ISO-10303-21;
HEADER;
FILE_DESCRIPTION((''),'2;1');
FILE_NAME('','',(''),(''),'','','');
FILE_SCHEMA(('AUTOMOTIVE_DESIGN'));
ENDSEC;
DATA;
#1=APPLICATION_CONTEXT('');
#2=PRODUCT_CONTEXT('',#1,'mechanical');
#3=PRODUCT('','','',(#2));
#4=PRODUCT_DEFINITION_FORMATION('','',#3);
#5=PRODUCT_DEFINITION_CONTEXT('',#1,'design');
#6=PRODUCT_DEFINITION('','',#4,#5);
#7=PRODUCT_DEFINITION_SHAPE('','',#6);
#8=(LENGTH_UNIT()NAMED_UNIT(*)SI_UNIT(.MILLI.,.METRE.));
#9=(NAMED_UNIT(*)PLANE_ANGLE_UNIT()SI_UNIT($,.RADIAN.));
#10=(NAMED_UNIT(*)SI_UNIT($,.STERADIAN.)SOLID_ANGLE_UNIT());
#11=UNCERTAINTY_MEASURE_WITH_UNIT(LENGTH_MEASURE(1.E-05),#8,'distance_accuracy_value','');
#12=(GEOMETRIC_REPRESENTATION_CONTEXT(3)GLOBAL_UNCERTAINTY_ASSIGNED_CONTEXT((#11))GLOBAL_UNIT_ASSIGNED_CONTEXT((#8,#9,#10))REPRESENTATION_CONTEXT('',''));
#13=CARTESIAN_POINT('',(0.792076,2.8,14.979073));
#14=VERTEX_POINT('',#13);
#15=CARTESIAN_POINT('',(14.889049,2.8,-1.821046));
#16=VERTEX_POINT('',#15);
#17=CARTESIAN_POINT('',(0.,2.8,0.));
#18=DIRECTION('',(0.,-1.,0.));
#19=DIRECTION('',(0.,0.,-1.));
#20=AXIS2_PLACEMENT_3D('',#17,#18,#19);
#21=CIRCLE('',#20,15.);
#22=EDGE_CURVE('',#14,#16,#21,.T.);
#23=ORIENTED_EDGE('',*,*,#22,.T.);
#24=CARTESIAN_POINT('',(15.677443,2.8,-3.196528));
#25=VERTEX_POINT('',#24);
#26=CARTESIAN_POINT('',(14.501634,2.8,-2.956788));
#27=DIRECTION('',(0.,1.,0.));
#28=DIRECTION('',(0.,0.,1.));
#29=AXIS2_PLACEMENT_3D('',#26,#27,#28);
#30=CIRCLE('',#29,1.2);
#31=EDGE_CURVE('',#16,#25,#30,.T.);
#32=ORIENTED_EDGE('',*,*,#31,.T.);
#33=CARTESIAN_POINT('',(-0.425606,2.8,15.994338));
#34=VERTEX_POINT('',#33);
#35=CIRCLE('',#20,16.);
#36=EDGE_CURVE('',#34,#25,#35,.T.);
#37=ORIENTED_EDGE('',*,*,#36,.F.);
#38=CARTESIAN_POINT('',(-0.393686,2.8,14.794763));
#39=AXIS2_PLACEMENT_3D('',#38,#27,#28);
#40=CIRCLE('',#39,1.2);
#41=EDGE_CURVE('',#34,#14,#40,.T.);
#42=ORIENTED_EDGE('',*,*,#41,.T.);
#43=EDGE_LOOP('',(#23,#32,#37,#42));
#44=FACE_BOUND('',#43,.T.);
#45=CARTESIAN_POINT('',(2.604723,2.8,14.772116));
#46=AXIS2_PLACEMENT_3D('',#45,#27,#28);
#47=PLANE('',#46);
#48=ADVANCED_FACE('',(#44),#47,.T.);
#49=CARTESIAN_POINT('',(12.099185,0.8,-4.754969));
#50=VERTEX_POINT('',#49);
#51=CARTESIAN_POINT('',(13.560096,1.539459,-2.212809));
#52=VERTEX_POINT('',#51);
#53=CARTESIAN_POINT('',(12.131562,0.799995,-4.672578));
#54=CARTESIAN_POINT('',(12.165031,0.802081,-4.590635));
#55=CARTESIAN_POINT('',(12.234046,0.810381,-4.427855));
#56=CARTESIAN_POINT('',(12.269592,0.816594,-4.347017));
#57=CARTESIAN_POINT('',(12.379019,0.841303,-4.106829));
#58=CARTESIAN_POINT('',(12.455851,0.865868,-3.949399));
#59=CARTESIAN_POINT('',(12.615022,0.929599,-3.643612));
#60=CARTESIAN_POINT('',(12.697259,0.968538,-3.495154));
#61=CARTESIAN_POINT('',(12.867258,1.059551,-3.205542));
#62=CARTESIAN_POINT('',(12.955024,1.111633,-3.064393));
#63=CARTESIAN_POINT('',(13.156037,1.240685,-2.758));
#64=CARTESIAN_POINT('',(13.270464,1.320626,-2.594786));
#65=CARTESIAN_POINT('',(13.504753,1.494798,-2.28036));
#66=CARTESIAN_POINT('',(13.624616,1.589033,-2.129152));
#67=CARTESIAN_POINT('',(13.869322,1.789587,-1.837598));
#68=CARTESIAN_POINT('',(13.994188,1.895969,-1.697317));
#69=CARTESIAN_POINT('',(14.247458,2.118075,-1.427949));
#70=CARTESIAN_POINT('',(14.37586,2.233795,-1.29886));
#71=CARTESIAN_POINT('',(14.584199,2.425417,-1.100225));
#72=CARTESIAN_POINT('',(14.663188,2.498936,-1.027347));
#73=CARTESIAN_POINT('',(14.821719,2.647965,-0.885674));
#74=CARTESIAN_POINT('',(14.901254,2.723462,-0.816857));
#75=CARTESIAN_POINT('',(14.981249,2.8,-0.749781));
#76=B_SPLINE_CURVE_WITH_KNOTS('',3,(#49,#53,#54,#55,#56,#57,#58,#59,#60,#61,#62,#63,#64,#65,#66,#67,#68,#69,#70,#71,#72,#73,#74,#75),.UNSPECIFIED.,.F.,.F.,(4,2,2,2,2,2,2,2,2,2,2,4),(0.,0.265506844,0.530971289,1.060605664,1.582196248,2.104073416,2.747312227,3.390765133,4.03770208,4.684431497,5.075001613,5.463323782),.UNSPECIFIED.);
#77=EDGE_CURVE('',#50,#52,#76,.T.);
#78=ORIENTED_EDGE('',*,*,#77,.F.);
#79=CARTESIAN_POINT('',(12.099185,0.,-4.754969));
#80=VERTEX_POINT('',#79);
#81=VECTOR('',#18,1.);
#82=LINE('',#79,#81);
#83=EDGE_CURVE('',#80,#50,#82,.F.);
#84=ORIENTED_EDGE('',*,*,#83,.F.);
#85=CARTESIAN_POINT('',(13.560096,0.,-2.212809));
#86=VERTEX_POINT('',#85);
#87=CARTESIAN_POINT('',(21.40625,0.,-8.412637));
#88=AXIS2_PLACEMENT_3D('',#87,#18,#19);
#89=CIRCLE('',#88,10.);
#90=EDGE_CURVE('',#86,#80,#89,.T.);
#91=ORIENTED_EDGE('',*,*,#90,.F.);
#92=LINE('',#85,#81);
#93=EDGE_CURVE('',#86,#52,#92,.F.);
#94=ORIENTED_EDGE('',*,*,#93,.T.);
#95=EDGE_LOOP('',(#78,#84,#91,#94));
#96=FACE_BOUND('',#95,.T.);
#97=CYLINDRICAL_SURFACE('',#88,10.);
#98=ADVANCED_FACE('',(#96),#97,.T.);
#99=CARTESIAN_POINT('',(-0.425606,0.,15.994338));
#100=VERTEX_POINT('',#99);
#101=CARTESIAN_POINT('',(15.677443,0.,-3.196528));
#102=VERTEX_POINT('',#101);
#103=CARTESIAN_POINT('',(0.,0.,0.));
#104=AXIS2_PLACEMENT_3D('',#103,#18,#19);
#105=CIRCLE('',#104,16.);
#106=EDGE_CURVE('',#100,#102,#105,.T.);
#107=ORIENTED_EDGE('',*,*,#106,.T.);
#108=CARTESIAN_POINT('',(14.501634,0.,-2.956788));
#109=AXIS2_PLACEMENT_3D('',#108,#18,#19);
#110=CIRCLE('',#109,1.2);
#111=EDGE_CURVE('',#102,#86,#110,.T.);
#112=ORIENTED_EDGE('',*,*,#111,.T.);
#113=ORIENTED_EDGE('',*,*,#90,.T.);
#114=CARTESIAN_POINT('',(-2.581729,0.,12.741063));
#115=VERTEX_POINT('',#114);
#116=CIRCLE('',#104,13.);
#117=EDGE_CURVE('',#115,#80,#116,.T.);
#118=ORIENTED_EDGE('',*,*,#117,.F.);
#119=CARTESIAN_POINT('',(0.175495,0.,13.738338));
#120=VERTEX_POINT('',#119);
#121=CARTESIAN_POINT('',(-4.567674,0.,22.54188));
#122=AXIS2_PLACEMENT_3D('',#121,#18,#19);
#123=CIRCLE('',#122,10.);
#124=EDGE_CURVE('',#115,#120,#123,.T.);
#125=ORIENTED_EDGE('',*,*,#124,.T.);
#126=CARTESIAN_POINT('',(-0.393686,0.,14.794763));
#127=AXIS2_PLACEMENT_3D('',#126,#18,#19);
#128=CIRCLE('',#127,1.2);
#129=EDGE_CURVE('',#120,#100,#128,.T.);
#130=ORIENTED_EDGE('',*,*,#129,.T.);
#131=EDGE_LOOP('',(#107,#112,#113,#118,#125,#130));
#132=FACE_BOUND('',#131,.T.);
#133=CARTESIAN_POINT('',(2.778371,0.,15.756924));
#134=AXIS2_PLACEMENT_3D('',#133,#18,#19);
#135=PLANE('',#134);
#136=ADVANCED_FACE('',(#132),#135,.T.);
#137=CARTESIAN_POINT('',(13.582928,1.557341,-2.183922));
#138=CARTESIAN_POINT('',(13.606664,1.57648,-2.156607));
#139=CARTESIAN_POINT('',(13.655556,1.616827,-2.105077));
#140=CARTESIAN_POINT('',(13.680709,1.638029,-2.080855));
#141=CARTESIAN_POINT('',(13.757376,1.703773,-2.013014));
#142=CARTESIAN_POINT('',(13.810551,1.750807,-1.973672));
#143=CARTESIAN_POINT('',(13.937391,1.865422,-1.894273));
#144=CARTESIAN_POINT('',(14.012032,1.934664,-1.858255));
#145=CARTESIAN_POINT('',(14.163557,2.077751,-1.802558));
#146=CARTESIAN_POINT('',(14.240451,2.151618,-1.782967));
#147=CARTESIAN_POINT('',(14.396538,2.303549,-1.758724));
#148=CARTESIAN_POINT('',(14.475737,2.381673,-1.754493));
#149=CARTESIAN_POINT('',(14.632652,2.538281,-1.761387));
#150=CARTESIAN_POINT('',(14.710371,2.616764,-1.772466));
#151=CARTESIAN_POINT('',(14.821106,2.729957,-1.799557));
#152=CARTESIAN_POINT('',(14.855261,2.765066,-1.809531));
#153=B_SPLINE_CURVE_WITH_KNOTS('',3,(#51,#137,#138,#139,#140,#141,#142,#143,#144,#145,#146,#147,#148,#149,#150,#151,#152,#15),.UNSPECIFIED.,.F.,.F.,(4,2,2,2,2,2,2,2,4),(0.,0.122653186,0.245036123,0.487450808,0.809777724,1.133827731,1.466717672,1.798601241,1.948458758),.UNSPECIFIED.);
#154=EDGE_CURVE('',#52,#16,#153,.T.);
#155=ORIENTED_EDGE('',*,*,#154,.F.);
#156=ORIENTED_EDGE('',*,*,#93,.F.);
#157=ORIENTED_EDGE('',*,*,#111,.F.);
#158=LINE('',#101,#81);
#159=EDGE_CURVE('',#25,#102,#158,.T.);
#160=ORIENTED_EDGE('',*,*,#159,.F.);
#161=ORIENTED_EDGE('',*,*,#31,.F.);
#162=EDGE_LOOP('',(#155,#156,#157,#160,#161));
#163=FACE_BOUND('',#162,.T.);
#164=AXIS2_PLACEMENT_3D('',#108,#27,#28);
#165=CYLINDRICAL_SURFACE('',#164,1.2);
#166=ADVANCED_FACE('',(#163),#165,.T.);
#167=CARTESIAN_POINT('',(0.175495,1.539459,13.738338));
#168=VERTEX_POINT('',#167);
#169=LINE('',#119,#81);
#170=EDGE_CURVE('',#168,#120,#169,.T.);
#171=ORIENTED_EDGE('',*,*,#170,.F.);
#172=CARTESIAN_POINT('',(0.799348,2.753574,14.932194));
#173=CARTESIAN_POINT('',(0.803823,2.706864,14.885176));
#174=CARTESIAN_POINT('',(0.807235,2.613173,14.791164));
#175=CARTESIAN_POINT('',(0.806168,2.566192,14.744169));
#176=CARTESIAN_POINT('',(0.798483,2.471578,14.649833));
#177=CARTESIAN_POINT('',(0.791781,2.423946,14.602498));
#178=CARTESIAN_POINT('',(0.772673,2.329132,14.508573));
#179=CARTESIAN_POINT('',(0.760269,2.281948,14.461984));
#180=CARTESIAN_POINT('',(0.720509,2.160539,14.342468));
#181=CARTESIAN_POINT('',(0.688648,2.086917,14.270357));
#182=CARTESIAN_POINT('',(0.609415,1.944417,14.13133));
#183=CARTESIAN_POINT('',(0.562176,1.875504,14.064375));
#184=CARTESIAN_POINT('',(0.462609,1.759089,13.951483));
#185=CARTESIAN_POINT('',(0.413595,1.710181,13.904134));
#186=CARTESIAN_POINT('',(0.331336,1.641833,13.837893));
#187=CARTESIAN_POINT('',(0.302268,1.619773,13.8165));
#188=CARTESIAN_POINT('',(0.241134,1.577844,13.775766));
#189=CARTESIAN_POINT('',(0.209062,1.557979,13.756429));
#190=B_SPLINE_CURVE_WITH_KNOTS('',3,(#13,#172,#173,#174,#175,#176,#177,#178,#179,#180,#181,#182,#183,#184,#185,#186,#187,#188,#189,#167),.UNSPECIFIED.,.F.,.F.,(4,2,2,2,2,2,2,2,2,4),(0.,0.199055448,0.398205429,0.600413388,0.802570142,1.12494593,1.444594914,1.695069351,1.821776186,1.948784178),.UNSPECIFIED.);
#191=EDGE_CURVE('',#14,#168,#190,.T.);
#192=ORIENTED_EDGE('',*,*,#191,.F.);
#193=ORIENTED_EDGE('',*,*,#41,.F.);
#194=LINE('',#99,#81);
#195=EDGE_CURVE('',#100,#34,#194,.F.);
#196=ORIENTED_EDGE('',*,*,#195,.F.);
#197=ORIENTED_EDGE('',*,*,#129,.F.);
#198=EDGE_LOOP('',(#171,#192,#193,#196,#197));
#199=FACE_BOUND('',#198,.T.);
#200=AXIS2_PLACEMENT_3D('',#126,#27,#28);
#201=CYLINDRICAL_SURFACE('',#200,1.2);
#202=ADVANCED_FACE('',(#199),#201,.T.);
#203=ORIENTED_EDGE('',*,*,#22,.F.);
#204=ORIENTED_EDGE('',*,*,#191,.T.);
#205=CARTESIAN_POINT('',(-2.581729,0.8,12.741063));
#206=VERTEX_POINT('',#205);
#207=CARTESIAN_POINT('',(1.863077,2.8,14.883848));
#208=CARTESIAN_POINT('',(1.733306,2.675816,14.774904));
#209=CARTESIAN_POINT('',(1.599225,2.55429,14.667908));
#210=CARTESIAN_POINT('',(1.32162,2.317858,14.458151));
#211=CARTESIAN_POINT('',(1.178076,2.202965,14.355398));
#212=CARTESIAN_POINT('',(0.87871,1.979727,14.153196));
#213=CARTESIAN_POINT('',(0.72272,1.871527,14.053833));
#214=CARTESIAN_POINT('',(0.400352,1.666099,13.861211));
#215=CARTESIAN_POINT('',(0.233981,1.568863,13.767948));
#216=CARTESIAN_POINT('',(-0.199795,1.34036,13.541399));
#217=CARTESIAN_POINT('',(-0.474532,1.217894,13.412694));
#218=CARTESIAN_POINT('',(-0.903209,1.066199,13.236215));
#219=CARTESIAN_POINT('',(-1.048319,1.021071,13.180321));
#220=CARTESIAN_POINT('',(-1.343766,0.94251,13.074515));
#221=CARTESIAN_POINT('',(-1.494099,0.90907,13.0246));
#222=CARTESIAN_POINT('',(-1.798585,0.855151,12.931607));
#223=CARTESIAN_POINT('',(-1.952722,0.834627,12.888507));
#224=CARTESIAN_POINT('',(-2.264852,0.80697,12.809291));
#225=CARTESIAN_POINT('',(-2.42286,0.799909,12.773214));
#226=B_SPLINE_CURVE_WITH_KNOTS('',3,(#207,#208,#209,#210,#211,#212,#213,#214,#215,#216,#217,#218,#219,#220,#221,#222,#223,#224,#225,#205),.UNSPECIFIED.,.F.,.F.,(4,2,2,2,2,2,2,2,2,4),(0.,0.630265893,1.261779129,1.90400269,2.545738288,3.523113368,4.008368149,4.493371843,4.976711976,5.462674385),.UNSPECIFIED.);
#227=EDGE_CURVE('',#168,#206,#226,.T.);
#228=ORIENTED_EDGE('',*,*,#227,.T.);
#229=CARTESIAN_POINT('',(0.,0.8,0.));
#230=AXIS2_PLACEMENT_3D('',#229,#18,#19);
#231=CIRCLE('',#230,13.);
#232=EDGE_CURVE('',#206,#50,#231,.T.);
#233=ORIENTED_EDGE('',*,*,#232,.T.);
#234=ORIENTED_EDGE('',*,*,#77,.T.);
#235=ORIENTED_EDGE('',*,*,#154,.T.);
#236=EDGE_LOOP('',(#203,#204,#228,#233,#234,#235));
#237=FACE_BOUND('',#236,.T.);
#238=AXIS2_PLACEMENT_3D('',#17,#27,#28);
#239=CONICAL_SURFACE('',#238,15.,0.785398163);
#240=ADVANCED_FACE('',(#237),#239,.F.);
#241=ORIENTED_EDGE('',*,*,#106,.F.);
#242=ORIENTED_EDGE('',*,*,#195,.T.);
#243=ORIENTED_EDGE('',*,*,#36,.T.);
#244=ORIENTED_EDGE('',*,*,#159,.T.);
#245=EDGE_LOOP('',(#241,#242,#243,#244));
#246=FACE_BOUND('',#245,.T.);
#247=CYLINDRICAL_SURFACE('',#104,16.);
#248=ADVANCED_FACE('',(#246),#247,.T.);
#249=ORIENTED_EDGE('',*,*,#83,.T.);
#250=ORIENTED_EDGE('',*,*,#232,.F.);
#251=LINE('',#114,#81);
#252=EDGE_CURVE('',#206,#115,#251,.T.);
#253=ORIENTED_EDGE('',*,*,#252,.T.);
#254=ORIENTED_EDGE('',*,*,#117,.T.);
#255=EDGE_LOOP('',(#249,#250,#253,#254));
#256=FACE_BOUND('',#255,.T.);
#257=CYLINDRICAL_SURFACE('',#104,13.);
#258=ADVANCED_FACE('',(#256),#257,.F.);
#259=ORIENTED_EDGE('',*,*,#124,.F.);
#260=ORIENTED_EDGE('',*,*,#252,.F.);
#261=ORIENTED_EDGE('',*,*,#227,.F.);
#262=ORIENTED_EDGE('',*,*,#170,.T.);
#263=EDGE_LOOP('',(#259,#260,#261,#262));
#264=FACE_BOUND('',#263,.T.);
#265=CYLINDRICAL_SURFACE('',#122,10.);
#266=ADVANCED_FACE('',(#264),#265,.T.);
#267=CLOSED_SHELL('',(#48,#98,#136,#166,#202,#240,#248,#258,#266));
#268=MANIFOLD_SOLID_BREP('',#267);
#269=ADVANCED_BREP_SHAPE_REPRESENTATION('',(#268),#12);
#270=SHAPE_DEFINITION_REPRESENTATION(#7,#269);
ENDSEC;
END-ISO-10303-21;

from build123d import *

# Parameters (mm, degrees)
REVOLVE1_ANGLE = 280
FILLET1_DEPTH  = 4
FILLET2_R      = 1.2


with BuildPart() as part:
    # Sketch1 → Revolve1 (revolve)
    with BuildSketch(Plane.XY):
        Polygon((13, 0), (13, 0.8), (15, 2.8), (16, 2.8), (16, 0), align=None)
    revolve(axis=Axis((0, 0, 0), (0, 1, 0)), revolution_arc=REVOLVE1_ANGLE)

    # Fillet1: read off the stored shape, not the designer's step
    # Fillet1 outline → Fillet1 (cut)
    with BuildSketch(Plane(origin=(0, 0, 0), x_dir=(1, 0, 0), z_dir=(0, 1, 0))):
        with BuildLine():
            Line((13, 0), (16, 0))
            ThreePointArc((16, 0), (13.674960129, 2.07014875), (12.099184783, 4.754968727))
            ThreePointArc((12.099184783, 4.754968727), (12.77281101, 2.419772492), (13, 0))
        make_face()
        with BuildLine():
            ThreePointArc((2.25742631, -12.802500789), (-0.165035355, -12.998952394), (-2.581728679, -12.741062633))
            ThreePointArc((-2.581728679, -12.741062633), (0.335933367, -13.826684315), (2.778370843, -15.756924048))
            Line((2.778370843, -15.756924048), (2.25742631, -12.802500789))
        make_face()
    extrude(amount=FILLET1_DEPTH, mode=Mode.SUBTRACT)

    # Fillet2
    fillet2_edges = [part.edges().sort_by_distance(p)[0] for p in [
        (16, 1.4, 0),
        (2.778370843, 1.4, 15.756924048),
    ]]
    fillet(fillet2_edges, radius=FILLET2_R)


solid = part.part
